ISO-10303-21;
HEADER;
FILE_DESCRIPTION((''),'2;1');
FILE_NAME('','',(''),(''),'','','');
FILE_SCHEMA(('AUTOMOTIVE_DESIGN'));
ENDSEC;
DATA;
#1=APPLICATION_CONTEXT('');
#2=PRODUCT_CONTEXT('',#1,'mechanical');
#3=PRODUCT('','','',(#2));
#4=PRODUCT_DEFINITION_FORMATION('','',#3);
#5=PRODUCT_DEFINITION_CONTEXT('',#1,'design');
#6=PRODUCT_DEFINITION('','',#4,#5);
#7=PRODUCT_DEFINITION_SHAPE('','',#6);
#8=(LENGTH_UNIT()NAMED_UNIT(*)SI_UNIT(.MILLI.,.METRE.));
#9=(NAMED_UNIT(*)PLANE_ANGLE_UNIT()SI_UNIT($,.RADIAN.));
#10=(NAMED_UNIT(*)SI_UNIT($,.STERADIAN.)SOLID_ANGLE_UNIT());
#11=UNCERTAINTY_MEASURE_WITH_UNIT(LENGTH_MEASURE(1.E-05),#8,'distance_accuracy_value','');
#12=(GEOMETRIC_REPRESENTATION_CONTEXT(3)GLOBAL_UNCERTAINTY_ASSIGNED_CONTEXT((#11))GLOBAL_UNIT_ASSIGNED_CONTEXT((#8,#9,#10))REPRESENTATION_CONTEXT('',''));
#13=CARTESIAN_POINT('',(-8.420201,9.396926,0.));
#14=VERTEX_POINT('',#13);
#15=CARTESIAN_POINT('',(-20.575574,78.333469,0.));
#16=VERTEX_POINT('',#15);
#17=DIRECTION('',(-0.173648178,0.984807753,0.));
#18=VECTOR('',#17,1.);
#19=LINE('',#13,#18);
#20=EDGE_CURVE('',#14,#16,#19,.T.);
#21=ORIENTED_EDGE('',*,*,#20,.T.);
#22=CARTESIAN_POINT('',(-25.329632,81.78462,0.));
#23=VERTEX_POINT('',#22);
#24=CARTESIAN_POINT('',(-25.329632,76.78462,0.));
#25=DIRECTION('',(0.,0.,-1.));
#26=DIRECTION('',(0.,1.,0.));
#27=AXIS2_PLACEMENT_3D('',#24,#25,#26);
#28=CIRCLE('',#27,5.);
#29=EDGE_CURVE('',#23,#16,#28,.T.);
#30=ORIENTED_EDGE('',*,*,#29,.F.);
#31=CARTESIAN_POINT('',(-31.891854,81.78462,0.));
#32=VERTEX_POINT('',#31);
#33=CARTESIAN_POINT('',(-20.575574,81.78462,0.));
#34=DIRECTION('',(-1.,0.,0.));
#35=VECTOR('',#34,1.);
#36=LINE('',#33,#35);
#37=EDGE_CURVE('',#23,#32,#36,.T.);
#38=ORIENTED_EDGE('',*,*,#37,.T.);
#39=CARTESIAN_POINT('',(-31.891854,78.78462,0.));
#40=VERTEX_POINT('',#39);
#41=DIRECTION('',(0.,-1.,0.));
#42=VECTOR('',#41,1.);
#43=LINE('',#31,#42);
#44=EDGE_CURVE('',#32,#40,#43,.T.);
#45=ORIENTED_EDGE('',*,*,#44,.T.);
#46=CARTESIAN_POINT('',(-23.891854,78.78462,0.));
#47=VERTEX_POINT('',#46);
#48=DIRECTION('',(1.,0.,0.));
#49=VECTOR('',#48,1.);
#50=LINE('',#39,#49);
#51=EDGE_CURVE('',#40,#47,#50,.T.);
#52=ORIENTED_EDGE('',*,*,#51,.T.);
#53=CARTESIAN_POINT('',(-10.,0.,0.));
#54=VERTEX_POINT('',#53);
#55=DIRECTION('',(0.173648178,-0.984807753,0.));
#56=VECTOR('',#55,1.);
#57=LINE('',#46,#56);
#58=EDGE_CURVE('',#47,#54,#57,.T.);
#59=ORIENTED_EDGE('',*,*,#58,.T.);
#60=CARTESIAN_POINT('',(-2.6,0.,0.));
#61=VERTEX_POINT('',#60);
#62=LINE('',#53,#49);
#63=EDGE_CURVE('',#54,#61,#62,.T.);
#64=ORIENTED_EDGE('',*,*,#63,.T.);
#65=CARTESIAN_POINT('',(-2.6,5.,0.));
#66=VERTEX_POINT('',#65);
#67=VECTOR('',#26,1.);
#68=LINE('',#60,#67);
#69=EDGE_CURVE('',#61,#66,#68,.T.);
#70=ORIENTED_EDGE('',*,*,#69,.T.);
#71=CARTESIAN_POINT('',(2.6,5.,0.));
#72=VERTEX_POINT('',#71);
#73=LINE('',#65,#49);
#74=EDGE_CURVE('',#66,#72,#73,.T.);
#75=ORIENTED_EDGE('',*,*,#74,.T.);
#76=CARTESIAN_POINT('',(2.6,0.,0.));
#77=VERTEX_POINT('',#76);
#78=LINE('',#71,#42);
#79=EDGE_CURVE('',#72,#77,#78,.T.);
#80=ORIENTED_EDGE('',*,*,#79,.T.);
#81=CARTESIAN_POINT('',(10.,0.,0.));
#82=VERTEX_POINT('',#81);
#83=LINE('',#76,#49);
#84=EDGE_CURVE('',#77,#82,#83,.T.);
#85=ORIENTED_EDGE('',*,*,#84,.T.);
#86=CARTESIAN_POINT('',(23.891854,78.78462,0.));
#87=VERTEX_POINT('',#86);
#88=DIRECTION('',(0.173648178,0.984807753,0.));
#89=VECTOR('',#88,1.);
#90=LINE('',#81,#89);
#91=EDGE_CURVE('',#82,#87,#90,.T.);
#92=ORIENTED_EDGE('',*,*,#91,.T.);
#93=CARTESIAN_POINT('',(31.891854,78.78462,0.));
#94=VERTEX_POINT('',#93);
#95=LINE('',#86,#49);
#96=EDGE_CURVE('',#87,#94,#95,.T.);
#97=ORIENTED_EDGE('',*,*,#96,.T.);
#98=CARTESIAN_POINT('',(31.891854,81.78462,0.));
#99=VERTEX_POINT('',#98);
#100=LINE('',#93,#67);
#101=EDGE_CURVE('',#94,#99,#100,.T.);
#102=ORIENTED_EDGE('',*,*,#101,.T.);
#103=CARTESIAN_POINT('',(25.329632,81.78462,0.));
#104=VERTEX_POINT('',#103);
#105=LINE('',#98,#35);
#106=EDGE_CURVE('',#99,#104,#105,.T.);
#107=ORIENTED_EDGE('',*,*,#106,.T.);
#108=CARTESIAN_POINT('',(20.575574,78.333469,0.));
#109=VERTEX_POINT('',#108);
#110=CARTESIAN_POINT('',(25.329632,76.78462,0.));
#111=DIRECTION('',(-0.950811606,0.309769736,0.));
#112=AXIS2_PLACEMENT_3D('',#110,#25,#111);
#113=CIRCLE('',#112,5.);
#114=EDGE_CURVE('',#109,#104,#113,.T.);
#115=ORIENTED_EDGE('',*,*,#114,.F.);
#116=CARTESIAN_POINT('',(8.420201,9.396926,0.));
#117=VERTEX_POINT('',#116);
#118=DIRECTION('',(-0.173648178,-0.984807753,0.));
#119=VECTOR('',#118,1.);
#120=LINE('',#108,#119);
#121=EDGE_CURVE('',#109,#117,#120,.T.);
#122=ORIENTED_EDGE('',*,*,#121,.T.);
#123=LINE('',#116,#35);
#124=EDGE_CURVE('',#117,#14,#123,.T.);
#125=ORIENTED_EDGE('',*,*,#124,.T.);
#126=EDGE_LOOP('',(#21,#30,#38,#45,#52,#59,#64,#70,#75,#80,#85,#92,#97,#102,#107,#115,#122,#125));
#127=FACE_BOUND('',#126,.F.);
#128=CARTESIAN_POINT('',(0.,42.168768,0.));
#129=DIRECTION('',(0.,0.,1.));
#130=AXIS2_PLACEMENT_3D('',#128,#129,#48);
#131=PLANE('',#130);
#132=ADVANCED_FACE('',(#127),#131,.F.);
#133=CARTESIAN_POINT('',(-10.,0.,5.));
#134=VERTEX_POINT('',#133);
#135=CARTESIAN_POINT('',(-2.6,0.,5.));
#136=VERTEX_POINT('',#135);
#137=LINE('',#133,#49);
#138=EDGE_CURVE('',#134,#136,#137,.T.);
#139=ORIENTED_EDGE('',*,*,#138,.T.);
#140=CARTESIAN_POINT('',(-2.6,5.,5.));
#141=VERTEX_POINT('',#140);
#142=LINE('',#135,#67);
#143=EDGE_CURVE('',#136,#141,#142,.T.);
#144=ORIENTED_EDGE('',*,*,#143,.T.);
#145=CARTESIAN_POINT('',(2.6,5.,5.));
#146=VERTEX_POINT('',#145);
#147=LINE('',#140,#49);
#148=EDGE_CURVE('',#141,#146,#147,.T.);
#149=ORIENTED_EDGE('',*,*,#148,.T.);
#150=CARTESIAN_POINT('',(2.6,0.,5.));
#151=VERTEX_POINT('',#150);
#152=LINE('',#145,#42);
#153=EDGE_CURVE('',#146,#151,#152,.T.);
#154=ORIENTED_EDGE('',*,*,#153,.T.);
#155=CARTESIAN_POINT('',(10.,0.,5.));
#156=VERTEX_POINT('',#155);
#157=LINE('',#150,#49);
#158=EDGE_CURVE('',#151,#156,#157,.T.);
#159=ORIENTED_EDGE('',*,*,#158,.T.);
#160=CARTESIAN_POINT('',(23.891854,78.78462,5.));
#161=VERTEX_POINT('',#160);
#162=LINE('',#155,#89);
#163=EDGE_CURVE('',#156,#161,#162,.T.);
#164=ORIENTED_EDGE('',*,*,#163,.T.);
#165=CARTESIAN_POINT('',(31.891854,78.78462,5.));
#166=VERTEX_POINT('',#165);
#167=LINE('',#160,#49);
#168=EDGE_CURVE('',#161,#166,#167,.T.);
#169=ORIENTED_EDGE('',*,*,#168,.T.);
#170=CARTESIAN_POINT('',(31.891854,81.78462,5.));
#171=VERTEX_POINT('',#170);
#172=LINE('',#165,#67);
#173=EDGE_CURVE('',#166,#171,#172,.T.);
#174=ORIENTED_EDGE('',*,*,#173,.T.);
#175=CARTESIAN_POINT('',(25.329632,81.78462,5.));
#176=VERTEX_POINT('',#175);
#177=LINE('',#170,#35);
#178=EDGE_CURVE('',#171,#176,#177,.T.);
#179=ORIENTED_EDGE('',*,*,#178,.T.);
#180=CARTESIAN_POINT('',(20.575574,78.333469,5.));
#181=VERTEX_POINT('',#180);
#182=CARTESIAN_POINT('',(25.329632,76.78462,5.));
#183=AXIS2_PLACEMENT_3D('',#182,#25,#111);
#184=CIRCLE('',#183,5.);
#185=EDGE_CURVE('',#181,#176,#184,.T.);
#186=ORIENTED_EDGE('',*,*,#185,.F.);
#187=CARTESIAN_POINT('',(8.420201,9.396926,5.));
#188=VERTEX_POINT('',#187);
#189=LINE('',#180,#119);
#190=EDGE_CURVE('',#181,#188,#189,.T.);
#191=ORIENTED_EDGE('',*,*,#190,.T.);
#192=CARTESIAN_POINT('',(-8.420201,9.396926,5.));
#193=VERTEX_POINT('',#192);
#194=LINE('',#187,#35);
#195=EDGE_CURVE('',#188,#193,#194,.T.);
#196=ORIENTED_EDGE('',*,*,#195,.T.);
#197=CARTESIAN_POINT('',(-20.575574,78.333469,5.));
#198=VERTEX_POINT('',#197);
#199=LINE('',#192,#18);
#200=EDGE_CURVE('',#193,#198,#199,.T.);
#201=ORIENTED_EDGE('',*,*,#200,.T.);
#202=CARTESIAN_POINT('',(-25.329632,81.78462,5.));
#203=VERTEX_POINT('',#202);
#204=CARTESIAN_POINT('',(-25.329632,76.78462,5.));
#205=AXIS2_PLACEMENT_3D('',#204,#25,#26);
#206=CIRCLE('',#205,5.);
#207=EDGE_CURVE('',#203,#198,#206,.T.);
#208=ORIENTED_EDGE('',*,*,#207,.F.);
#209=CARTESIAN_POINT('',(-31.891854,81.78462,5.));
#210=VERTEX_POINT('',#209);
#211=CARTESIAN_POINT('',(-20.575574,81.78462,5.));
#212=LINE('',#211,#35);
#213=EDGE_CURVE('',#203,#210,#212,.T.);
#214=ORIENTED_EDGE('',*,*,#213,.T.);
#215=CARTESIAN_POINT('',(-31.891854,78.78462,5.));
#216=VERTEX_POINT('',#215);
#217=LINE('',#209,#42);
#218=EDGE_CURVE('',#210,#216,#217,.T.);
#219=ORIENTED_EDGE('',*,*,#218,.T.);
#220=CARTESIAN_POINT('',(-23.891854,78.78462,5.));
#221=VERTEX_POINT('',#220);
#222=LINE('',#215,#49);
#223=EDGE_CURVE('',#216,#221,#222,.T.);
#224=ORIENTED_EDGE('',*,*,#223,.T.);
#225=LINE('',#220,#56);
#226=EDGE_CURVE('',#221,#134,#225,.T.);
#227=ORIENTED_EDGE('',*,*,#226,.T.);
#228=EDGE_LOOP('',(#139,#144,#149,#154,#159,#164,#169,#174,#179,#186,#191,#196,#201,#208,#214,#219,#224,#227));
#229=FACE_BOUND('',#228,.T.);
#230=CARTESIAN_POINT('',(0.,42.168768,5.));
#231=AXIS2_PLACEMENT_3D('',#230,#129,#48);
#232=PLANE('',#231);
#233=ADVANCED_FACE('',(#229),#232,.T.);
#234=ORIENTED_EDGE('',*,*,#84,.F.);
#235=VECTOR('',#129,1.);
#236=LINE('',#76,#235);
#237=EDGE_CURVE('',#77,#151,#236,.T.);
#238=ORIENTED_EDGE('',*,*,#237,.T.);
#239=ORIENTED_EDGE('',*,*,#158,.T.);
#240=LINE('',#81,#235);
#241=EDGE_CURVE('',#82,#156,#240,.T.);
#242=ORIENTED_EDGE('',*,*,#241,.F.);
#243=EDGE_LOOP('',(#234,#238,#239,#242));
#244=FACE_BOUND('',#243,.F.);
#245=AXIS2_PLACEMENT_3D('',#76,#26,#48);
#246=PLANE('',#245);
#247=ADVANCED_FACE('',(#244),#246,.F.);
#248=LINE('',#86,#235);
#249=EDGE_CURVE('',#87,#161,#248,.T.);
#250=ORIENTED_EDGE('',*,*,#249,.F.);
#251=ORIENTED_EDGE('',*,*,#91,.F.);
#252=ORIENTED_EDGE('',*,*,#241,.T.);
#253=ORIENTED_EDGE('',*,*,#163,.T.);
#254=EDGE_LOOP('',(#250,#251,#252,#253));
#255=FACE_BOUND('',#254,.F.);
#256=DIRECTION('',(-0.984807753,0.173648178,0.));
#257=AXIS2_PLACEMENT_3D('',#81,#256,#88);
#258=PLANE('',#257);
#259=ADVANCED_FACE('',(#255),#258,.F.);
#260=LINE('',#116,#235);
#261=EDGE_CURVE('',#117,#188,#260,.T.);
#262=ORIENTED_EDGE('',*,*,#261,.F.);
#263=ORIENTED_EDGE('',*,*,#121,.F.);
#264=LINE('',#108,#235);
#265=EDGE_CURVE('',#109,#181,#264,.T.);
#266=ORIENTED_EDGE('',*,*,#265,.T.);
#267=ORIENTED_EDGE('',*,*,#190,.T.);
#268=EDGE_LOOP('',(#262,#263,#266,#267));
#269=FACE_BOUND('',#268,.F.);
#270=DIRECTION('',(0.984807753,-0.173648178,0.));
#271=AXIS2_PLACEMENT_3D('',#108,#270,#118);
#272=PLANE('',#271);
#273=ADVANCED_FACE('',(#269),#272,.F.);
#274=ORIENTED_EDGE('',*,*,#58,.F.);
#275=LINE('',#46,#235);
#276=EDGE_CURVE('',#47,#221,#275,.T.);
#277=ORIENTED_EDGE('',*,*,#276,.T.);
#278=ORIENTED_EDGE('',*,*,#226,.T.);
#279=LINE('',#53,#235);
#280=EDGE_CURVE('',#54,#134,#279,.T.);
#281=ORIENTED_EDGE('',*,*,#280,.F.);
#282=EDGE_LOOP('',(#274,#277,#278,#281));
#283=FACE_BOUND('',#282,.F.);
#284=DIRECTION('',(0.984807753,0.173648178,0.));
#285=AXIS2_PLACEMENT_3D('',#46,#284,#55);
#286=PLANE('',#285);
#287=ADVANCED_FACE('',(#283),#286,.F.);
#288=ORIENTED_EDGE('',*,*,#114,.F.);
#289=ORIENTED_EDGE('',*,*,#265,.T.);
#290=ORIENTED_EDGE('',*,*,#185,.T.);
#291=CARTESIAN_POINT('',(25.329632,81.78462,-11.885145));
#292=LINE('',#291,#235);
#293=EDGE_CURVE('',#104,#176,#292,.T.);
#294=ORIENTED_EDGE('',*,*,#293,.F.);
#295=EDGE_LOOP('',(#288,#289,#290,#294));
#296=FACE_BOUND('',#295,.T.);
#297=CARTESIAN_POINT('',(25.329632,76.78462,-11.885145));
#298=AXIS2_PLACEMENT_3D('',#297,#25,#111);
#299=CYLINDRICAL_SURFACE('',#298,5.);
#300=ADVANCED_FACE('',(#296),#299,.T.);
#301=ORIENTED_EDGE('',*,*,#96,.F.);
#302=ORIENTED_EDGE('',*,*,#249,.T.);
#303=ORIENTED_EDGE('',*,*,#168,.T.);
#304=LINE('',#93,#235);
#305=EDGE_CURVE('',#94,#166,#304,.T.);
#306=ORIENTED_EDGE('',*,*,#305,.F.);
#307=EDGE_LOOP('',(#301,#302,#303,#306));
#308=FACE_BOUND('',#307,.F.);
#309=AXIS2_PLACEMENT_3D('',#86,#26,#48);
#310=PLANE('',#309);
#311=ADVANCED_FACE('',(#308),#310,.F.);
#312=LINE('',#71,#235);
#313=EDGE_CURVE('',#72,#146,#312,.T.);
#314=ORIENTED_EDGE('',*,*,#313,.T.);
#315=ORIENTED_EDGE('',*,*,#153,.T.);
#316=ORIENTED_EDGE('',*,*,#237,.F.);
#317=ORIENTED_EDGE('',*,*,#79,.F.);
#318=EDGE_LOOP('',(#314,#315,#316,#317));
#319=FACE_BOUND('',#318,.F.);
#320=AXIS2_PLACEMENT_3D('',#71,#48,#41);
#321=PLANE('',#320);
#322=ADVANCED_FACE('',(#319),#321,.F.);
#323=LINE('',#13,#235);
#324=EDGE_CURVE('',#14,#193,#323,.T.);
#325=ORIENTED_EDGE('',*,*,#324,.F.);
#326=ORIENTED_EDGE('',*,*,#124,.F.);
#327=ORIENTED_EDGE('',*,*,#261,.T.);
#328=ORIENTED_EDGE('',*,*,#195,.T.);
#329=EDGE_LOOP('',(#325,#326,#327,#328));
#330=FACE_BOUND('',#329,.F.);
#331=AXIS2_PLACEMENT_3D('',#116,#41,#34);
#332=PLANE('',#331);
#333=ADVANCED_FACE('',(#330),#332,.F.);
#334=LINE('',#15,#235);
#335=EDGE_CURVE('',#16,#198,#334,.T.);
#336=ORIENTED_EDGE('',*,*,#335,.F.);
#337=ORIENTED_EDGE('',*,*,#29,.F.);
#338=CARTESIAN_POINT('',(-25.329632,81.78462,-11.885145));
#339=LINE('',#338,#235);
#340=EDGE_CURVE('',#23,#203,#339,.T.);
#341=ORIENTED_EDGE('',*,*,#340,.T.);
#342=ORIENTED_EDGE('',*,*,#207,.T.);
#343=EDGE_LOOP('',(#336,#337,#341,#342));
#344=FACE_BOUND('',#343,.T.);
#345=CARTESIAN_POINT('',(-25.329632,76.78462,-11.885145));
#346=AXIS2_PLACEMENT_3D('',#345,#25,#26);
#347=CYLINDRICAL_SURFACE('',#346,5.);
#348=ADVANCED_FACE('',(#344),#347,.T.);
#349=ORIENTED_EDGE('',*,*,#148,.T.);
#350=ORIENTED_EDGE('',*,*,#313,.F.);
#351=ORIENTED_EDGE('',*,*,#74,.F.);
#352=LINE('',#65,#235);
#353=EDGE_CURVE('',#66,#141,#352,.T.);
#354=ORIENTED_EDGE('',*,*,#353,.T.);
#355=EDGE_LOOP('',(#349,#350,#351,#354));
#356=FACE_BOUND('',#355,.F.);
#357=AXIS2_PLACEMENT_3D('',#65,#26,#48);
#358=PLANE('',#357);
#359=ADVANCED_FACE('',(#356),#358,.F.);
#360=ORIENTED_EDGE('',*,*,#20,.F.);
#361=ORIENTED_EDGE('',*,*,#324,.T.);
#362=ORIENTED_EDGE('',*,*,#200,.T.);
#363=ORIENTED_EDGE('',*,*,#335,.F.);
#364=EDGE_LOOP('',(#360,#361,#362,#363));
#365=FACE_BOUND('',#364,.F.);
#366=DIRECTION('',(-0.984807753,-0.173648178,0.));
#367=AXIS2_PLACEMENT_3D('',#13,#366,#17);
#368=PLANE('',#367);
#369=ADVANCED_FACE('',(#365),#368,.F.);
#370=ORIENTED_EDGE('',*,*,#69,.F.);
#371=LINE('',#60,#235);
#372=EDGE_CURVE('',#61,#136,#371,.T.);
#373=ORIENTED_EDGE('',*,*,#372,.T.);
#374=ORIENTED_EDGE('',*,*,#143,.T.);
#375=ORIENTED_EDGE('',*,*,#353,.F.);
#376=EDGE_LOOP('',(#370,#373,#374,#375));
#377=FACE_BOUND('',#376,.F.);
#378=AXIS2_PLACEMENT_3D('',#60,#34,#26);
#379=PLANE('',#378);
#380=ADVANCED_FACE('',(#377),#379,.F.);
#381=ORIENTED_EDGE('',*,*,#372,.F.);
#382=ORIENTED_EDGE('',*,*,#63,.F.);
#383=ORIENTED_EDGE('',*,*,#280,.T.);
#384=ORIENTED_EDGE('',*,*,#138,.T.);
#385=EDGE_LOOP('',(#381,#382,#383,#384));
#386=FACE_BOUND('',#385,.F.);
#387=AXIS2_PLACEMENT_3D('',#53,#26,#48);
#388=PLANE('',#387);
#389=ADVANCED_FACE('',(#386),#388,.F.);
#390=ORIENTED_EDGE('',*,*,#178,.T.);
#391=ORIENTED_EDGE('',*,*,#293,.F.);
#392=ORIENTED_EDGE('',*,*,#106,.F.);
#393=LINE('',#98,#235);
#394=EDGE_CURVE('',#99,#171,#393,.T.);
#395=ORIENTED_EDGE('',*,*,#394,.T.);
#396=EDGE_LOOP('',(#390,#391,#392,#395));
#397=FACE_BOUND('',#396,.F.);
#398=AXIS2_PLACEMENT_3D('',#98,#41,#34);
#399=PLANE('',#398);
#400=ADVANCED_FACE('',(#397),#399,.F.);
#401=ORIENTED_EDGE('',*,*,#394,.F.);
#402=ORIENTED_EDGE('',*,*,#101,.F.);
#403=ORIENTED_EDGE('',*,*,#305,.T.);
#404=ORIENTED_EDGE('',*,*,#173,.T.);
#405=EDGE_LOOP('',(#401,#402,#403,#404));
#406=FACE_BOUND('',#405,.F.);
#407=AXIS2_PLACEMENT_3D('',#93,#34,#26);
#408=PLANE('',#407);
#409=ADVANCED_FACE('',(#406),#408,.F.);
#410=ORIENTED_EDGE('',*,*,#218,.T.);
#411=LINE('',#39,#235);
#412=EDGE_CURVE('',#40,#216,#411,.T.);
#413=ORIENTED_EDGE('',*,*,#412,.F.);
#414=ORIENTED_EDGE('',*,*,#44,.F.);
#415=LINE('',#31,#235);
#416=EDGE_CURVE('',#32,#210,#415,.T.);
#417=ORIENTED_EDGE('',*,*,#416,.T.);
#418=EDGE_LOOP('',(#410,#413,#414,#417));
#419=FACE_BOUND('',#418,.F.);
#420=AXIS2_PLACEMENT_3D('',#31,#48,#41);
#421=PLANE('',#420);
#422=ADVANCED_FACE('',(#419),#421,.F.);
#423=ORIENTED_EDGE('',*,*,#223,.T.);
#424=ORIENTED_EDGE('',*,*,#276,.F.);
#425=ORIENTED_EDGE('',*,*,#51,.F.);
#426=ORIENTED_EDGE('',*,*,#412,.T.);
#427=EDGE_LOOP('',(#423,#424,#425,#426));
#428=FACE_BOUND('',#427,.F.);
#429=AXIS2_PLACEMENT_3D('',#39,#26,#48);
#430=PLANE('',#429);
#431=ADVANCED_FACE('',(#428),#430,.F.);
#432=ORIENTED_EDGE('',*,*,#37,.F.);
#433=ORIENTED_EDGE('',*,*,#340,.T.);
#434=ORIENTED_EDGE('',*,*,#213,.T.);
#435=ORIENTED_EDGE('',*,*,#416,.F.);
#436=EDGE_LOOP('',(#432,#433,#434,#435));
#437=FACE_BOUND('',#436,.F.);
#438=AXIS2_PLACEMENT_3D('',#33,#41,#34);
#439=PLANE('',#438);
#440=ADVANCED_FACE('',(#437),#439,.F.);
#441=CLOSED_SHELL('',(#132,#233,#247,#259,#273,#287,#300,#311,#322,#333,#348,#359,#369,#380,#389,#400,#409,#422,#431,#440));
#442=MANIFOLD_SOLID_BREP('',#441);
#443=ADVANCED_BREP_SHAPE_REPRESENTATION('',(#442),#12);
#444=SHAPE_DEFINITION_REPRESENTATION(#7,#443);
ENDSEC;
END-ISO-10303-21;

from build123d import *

# Parameters (mm, degrees)
F1_DEPTH    = 5
F2_T1_DEPTH = 28.770290161


# Not quite as in the source:
# - a fillet or chamfer that OpenCascade refuses, or shapes differently, is made with other operations: its cross-section is extruded or revolved along the edge and cut away or added


with BuildPart() as f1:
    # F0 (on Top) → F1 (new body)
    with BuildSketch(Plane.XY):
        Polygon((-10, 0), (-2.6, 0), (-2.6, 5), (0, 5), (2.6, 5), (2.6, 0), (10, 0), (23.8918542134, 78.784620241), (31.8918542134, 78.784620241), (31.8918542134, 81.784620241), (20.5755738699, 81.784620241), (20.5755738699, 78.3334689187), (8.4202014333, 9.3969262079), (3.4202014333, 9.3969262079), (0, 9.3969262079), (-8.4202014333, 9.3969262079), (-20.5755738699, 78.3334689187), (-20.5755738699, 81.784620241), (-31.8918542134, 81.784620241), (-31.8918542134, 78.784620241), (-23.8918542134, 78.784620241), align=None)
    extrude(amount=F1_DEPTH)

    # F2: fillet of radius 5 on 2 edges, made by hand

    # F2_s2 → F2_t1 (cut)
    with BuildSketch(Plane.XY.offset(-11.8851450805)):
        with BuildLine():
            ThreePointArc((-25.3296319021, 81.784620241), (-22.3923068766, 80.8308680948), (-20.5755738699, 78.3334689187))
            Line((-20.5755738699, 78.3334689187), (-20.5755738699, 81.784620241))
            Line((-20.5755738699, 81.784620241), (-25.3296319021, 81.784620241))
        make_face()
        with BuildLine():
            ThreePointArc((20.5755738699, 78.3334689187), (22.3923068766, 80.8308680948), (25.3296319021, 81.784620241))
            Line((25.3296319021, 81.784620241), (20.5755738699, 81.784620241))
            Line((20.5755738699, 81.784620241), (20.5755738699, 78.3334689187))
        make_face()
    extrude(amount=F2_T1_DEPTH, mode=Mode.SUBTRACT)


solid = f1.part
